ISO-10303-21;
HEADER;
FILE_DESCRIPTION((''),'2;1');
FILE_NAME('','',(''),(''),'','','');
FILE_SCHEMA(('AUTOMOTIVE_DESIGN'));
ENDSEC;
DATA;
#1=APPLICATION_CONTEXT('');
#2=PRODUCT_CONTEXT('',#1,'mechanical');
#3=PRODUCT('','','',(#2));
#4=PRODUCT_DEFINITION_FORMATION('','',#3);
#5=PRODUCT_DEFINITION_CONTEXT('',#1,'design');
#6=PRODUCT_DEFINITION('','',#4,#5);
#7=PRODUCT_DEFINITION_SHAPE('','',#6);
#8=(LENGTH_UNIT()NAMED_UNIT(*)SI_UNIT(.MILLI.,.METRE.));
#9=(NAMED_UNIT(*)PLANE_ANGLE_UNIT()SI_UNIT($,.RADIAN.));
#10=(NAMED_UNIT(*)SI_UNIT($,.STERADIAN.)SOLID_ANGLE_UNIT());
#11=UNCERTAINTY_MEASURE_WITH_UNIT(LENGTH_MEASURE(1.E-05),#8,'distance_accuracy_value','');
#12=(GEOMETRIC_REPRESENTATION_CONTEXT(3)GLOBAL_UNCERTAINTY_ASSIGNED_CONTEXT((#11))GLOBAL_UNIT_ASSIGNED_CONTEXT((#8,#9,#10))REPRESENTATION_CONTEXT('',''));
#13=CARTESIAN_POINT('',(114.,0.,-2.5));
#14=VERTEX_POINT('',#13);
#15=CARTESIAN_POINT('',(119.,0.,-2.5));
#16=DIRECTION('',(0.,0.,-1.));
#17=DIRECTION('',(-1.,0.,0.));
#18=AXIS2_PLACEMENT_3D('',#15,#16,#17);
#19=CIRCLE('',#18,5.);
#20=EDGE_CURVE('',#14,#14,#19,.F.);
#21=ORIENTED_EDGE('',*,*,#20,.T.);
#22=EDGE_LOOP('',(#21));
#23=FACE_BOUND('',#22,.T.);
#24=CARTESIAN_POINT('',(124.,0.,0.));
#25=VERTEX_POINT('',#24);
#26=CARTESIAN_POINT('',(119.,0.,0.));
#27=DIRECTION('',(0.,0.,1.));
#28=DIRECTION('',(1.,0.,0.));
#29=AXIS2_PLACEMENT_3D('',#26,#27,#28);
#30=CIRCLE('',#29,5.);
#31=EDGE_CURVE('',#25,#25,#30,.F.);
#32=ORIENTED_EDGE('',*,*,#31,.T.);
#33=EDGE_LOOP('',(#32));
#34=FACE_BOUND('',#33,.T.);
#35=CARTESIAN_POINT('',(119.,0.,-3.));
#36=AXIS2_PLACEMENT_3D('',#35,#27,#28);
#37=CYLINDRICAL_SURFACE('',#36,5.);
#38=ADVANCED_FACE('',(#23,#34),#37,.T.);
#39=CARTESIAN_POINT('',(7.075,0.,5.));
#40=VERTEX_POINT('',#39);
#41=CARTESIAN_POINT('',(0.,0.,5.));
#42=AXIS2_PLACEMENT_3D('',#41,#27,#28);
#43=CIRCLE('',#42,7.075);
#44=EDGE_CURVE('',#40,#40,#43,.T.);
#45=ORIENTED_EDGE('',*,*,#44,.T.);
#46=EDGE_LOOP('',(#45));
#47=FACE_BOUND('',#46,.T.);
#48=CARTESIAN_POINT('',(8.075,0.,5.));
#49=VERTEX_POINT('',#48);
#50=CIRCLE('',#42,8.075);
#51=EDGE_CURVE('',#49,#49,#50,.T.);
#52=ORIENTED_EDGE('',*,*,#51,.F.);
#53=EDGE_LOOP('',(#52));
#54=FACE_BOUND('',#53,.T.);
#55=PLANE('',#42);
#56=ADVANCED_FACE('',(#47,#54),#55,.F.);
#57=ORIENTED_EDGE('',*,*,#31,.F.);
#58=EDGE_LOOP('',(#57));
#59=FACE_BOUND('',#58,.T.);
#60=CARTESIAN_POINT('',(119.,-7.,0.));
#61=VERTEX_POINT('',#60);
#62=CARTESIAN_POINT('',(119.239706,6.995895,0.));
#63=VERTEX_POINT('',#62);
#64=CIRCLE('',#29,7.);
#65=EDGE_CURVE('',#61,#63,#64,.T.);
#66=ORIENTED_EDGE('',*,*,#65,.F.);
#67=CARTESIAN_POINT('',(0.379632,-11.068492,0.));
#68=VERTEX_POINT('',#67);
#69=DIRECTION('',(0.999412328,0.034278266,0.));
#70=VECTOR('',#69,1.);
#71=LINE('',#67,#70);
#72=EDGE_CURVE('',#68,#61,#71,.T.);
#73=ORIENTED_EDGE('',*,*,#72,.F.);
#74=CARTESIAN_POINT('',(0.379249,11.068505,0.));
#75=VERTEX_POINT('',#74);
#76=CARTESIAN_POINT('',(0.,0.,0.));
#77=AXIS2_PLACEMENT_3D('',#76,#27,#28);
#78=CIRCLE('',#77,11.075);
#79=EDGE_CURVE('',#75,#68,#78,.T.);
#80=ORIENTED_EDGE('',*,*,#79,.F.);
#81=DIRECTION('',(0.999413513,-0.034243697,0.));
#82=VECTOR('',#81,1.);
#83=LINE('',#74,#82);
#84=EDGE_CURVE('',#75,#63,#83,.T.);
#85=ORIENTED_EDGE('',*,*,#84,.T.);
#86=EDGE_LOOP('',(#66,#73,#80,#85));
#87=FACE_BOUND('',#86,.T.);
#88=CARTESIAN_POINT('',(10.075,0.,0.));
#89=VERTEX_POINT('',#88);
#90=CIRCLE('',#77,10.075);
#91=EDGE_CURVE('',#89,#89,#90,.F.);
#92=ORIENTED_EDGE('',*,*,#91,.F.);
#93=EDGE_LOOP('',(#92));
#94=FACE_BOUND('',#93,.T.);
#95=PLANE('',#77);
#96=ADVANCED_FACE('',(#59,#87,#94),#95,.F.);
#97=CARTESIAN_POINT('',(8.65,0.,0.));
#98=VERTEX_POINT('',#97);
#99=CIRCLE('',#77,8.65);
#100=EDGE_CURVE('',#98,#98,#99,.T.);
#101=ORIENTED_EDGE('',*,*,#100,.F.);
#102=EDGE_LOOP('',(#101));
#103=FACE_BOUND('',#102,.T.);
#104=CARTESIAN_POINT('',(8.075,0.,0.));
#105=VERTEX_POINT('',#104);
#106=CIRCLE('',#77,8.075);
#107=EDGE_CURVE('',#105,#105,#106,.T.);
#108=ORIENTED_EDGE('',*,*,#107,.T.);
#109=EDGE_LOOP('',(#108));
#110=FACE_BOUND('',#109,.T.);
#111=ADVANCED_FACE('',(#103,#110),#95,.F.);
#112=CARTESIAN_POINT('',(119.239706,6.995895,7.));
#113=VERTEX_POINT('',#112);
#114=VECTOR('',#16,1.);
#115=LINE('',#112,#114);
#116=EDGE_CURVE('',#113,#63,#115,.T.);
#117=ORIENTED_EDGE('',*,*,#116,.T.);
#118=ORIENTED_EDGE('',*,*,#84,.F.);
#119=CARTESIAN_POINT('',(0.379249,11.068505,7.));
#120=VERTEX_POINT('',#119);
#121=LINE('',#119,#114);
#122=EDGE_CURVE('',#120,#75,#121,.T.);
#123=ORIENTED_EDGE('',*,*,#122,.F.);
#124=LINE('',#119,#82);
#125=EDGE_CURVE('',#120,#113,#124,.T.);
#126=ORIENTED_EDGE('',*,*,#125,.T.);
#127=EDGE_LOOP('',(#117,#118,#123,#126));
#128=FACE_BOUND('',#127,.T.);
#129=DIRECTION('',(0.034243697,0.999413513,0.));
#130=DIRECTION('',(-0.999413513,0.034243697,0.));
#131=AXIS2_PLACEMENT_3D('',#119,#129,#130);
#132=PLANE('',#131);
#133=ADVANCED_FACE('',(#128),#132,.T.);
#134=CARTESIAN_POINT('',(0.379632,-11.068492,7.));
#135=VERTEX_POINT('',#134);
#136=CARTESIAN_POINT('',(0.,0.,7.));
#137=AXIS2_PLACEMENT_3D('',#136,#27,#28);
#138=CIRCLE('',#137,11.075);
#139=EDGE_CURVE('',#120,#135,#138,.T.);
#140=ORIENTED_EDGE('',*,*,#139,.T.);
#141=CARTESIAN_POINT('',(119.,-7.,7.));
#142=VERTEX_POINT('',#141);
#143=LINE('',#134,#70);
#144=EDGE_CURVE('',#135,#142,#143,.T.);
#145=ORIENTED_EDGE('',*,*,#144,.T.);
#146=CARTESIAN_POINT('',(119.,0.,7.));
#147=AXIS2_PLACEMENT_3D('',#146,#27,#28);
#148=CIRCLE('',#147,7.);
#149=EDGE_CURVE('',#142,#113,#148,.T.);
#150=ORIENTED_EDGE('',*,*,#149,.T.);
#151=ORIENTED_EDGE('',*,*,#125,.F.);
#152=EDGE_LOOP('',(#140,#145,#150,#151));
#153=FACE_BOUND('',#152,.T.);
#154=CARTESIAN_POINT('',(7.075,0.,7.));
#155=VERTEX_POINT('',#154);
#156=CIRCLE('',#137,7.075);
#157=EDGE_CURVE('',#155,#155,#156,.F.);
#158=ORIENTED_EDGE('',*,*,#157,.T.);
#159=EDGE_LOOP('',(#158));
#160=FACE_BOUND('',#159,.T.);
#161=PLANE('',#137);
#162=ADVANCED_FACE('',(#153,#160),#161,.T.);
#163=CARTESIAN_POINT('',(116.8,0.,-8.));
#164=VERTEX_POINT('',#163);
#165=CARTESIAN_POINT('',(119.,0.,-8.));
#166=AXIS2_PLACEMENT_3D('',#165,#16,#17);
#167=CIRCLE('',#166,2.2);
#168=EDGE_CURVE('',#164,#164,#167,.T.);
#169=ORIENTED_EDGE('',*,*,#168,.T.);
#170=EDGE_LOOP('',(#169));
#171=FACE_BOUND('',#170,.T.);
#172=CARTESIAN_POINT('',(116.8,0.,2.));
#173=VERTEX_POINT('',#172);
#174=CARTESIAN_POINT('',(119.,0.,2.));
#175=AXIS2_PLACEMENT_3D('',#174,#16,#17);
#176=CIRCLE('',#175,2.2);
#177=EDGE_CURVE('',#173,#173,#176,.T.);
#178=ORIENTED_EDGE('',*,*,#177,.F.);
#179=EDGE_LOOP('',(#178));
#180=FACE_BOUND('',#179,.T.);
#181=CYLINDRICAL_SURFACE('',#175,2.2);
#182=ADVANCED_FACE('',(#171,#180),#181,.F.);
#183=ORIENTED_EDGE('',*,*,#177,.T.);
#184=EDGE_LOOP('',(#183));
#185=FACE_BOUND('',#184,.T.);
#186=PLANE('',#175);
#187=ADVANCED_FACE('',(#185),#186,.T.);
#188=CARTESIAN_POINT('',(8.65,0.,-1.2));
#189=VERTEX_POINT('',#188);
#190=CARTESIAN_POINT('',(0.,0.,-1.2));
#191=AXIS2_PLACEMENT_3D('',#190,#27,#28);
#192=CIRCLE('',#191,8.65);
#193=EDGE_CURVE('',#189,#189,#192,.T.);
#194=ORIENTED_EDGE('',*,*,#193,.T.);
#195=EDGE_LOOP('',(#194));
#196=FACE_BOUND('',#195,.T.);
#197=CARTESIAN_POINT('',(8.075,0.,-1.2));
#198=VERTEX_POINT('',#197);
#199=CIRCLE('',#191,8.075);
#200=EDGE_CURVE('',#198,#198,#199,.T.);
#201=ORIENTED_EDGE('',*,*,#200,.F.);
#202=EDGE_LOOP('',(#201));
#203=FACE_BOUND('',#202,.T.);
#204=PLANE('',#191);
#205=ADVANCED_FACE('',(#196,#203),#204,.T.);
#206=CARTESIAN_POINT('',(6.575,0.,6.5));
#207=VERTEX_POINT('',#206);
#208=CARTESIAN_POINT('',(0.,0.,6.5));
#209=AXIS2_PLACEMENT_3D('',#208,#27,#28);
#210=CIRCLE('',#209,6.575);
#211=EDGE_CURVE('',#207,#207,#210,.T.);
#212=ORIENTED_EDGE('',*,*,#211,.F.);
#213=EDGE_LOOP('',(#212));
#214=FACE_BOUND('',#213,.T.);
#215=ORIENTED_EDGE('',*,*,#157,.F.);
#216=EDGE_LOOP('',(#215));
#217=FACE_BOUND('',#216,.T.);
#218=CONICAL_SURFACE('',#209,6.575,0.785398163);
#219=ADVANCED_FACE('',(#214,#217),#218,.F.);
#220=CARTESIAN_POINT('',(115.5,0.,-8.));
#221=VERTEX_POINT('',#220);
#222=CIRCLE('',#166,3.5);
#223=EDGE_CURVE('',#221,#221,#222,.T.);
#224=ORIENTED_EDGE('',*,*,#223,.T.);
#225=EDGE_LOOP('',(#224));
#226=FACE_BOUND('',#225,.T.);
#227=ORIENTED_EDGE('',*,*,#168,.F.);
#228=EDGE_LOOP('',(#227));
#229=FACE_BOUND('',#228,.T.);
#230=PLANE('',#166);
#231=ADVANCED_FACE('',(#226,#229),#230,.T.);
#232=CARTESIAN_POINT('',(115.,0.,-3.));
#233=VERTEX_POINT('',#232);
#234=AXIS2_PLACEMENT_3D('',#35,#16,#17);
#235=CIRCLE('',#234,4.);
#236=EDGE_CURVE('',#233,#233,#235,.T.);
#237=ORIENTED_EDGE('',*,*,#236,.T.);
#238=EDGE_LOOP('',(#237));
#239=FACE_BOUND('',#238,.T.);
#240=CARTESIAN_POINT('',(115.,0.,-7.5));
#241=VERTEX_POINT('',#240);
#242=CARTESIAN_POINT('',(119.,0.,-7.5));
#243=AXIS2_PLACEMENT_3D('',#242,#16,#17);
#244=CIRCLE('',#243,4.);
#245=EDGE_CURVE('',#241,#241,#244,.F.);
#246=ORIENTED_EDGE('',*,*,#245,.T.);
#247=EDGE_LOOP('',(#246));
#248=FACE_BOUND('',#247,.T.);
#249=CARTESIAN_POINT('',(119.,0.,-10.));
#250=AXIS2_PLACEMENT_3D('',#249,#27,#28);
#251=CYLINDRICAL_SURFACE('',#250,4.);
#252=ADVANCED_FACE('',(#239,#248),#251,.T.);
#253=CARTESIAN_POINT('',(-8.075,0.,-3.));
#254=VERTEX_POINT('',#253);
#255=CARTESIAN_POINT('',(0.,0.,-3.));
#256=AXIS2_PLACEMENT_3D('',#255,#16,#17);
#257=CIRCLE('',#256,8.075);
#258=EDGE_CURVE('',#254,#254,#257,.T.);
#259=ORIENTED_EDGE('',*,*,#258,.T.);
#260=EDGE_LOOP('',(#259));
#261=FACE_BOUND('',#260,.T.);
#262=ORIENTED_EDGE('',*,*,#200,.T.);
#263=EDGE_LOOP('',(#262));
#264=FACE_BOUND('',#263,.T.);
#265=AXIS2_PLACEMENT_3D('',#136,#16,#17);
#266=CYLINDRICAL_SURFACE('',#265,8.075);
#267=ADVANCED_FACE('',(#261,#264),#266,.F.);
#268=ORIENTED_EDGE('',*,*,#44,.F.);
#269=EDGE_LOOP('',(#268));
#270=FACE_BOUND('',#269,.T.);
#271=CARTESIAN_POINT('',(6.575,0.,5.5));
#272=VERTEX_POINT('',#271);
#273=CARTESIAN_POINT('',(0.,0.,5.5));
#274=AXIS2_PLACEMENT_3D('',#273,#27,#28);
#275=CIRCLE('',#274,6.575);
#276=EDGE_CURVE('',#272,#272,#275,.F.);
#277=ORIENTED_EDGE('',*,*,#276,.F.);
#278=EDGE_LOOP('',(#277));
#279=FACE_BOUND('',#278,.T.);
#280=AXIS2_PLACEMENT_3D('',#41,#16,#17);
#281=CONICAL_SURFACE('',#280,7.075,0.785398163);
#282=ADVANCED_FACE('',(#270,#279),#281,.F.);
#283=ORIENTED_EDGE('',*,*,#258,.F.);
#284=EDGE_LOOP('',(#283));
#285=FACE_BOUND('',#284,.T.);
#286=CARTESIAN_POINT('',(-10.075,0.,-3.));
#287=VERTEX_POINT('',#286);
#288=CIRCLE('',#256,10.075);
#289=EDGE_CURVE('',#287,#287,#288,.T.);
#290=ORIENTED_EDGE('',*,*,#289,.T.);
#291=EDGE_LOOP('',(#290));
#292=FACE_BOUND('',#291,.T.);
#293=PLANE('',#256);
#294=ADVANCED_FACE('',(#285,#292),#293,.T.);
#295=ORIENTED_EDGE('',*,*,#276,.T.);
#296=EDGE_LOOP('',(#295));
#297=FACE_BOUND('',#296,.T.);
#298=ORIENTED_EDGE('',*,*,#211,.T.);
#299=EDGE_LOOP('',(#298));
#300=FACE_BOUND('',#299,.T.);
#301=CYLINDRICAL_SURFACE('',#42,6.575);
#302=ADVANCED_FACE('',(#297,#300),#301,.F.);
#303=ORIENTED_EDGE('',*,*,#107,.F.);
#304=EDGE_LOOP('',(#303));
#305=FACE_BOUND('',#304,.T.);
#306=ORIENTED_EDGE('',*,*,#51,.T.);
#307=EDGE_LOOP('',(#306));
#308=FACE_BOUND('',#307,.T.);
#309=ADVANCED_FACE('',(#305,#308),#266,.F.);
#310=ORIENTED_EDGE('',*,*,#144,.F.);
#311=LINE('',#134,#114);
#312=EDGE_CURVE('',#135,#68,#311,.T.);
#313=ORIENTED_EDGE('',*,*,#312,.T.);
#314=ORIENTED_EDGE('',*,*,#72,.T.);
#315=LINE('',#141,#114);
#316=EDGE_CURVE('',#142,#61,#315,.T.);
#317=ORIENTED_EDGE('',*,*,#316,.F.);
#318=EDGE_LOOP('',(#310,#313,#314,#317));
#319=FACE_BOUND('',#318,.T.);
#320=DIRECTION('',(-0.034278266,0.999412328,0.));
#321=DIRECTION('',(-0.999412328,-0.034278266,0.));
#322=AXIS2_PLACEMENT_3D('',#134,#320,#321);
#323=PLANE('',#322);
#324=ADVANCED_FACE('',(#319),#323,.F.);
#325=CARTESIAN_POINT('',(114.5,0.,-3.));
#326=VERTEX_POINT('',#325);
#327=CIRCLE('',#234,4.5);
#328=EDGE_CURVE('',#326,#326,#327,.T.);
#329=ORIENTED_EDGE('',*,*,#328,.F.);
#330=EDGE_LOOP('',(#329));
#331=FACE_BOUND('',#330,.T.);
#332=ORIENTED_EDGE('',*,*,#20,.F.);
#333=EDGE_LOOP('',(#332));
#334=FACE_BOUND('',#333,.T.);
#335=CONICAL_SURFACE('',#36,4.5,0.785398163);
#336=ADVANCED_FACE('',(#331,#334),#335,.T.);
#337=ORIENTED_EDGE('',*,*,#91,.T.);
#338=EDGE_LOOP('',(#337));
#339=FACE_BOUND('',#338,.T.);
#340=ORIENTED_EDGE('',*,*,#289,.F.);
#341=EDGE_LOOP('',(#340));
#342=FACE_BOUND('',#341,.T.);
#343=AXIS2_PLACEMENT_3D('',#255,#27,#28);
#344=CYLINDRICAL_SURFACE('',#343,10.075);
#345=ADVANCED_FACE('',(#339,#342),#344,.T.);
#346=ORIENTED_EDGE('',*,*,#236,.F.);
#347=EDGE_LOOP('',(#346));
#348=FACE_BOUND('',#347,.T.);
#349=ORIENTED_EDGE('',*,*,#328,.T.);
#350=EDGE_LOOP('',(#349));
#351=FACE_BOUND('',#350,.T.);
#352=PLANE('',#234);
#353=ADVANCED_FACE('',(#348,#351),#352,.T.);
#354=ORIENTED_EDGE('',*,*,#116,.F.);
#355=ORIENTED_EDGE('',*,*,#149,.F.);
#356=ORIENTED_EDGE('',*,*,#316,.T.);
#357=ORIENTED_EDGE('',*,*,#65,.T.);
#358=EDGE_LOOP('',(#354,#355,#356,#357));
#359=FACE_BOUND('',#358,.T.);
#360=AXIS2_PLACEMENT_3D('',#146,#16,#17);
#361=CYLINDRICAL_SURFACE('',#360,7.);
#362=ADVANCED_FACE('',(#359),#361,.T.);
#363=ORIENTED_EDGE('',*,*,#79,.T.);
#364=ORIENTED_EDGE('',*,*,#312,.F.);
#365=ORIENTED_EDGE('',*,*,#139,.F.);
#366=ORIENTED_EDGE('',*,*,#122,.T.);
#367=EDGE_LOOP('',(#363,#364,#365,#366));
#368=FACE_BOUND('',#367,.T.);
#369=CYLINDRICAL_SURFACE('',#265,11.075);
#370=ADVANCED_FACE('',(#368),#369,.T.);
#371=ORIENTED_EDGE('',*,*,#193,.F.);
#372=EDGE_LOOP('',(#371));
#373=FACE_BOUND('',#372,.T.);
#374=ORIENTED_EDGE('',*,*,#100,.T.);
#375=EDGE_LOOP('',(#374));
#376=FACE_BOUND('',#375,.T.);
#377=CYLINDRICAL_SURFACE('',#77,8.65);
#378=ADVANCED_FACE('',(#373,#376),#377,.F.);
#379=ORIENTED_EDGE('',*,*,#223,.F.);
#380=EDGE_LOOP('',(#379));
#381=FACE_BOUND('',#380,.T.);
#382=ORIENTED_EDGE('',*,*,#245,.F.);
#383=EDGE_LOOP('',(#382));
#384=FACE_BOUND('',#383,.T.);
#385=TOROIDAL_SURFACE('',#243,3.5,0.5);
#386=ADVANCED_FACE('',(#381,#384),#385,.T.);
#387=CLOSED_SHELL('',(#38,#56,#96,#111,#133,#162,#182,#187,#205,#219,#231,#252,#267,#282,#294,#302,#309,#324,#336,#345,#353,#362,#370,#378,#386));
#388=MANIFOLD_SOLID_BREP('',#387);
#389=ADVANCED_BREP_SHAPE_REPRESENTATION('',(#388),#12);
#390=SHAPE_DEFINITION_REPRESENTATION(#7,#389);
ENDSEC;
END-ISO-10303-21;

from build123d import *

# Parameters (mm, degrees)
SKETCH_1_R          = 8.075
EXTRUDE_1_DEPTH     = 7
EXTRUDE_START       = -2
SKETCH_2_R          = 8.075
SKETCH_2_R_2        = 6.575
EXTRUDE_2_DEPTH     = 2
SKETCH_3_R          = 4
EXTRUDE_3_DEPTH     = 10
SKETCH_4_R          = 5
SKETCH_4_R_2        = 4
EXTRUDE_4_DEPTH     = 3
CHAMFER_1_SIZE      = 0.5
CUT_EXTRUDE_1_DEPTH = 7
CUT_EXTRUDE_2_DEPTH = 5
CUT_EXTRUDE_START   = -2
SKETCH_8_R          = 4
CUT_EXTRUDE_3_DEPTH = 2
FILLET_1_R          = 0.5
SKETCH_9_R          = 2.2
CUT_EXTRUDE_4_DEPTH = 10
EXTRUDE_START_2     = 3
SKETCH_10_R         = 10.075
SKETCH_10_R_2       = 8.075
EXTRUDE_5_DEPTH     = 3
EXTRUDE_6_DEPTH     = 2
EXTRUDE_START_3     = 5
EXTRUDE_7_DEPTH     = 5


with BuildPart() as part:
    # 草图1 → 凸台-拉伸1 (new body)
    with BuildSketch(Plane.XY):
        with BuildLine():
            ThreePointArc((0.37924895, 11.068504652), (-11.074999998, -0.000191538), (0.379631801, -11.068491528))
            Line((0.379631801, -11.068491528), (119, -7))
            ThreePointArc((119, -7), (125.998973572, -0.119870518), (119.239705882, 6.995894588))
            Line((119.239705882, 6.995894588), (0.37924895, 11.068504652))
        make_face()
        Circle(SKETCH_1_R, mode=Mode.SUBTRACT)
    extrude(amount=EXTRUDE_1_DEPTH)

    # 草图2 → 凸台-拉伸2 (add)
    with BuildSketch(Plane.XY.offset(7).offset(EXTRUDE_START)):
        Circle(SKETCH_2_R)
        Circle(SKETCH_2_R_2, mode=Mode.SUBTRACT)
    extrude(amount=EXTRUDE_2_DEPTH)

    # 草图3 → 凸台-拉伸3 (add)
    with BuildSketch(Plane(origin=(0, 0, 0), x_dir=(-1, 0, 0), z_dir=(0, 0, -1))):
        with Locations((-119, 0)):
            Circle(SKETCH_3_R)
    extrude(amount=EXTRUDE_3_DEPTH)

    # 草图4 → 凸台-拉伸4 (add)
    with BuildSketch(Plane(origin=(0, 0, 0), x_dir=(-1, 0, 0), z_dir=(0, 0, -1))):
        with Locations(Location((-119, 0, 0), (0, 0, 180))):
            Circle(SKETCH_4_R)
        with Locations((-119, 0)):
            Circle(SKETCH_4_R_2, mode=Mode.SUBTRACT)
    extrude(amount=EXTRUDE_4_DEPTH)

    # 倒角1
    chamfer_1_edges = [part.edges().sort_by_distance(p)[0] for p in [
        (-6.575, 0, 5),
        (-6.575, 0, 7),
        (123, 0, -10),
        (114, 0, -3),
    ]]
    chamfer(chamfer_1_edges, length=CHAMFER_1_SIZE)

    # 草图5 → 切除-拉伸1 (cut)
    with BuildSketch(Plane(origin=(0, 0, 0), x_dir=(-1, 0, 0), z_dir=(0, 0, -1))):
        with BuildLine():
            ThreePointArc((-12.757234161, -4.640431182), (-13.574999998, 0.000234775), (-12.757073645, 4.640872443))
            Line((-12.757073645, 4.640872443), (-109.090204802, 1.340134001))
            ThreePointArc((-109.090204802, 1.340134001), (-109.022576686, 0.671583213), (-109, 0))
            ThreePointArc((-109, 0), (-109.022449652, -0.669693251), (-109.08969781, -1.336379625))
            Line((-109.08969781, -1.336379625), (-12.757234161, -4.640431182))
        make_face()
    extrude(amount=-CUT_EXTRUDE_1_DEPTH, mode=Mode.SUBTRACT)

    # 草图6 → 切除-拉伸2 (cut)
    with BuildSketch(Plane(origin=(0, 0, 0), x_dir=(-1, 0, 0), z_dir=(0, 0, -1))):
        Polygon((-109.08969781, -1.336379625), (-12.757234161, -4.640431182), (-12.860068961, -7.638668165), (-109.192532609, -4.334616608), align=None)
        Polygon((-12.757073645, 4.640872443), (-109.090204802, 1.340134001), (-109.192935895, 4.338374538), (-12.859804737, 7.63911298), align=None)
    extrude(amount=-CUT_EXTRUDE_2_DEPTH, mode=Mode.SUBTRACT)

    # 草图8 → 切除-拉伸3 (cut)
    with BuildSketch(Plane(origin=(0, 0, -10), x_dir=(-1, 0, 0), z_dir=(0, 0, -1)).offset(CUT_EXTRUDE_START)):
        with Locations((-119, 0)):
            Circle(SKETCH_8_R)
    extrude(amount=CUT_EXTRUDE_3_DEPTH, mode=Mode.SUBTRACT)

    # 圆角1
    fillet_1_edges = [part.edges().sort_by_distance(p)[0] for p in [
        (123, 0, -8),
    ]]
    fillet(fillet_1_edges, radius=FILLET_1_R)

    # 草图9 → 切除-拉伸4 (cut)
    with BuildSketch(Plane(origin=(0, 0, -8), x_dir=(-1, 0, 0), z_dir=(0, 0, -1))):
        with Locations((-119, 0)):
            Circle(SKETCH_9_R)
    extrude(amount=-CUT_EXTRUDE_4_DEPTH, mode=Mode.SUBTRACT)

    # 草图10 → 凸台-拉伸5 (add)
    with BuildSketch(Plane(origin=(0, 0, 0), x_dir=(-1, 0, 0), z_dir=(0, 0, -1)).offset(EXTRUDE_START_2)):
        with Locations(Location((0, 0, 0), (0, 0, 180))):
            Circle(SKETCH_10_R)
        Circle(SKETCH_10_R_2, mode=Mode.SUBTRACT)
    extrude(amount=-EXTRUDE_5_DEPTH)

    # 切除-旋转2: read off the stored shape, not the designer's step
    # 切除-旋转2: loft between two sections, ruled curve by curve
    cut_revolve_2_from = [
        Edge.make_three_point_arc((8.65, 0, -1.2), (0, 8.65, -1.2), (-8.65, 0, -1.2)),
        Edge.make_three_point_arc((-8.65, 0, -1.2), (0, -8.65, -1.2), (8.65, 0, -1.2)),
    ]
    cut_revolve_2_to = [
        Edge.make_three_point_arc((8.65, 0, 0), (0, 8.65, 0), (-8.65, 0, 0)),
        Edge.make_three_point_arc((-8.65, 0, 0), (0, -8.65, 0), (8.65, 0, 0)),
    ]
    cut_revolve_2 = Solid(Shell([*[Face.make_surface_from_curves(cut_revolve_2_from[k], cut_revolve_2_to[k]) for k in range(2)], Face(Wire(cut_revolve_2_from)), Face(Wire(cut_revolve_2_to))]))
    add(cut_revolve_2, mode=Mode.SUBTRACT)

    # 草图12 → 凸台-拉伸6 (add)
    with BuildSketch(Plane.XY.offset(7).offset(EXTRUDE_START)):
        with BuildLine():
            Line((109.08969781, -1.336379625), (12.757234161, -4.640431182))
            ThreePointArc((12.757234161, -4.640431182), (13.574999998, 0.000234775), (12.757073645, 4.640872443))
            Line((12.757073645, 4.640872443), (109.090204802, 1.340134001))
            ThreePointArc((109.090204802, 1.340134001), (109.000000179, 0.001894226), (109.08969781, -1.336379625))
        make_face()
    extrude(amount=EXTRUDE_6_DEPTH)

    # 草图13 → 凸台-拉伸7 (add)
    with BuildSketch(Plane(origin=(0, 0, 5), x_dir=(-1, 0, 0), z_dir=(0, 0, -1)).offset(EXTRUDE_START_3)):
        with BuildLine():
            Line((-109.08969781, -1.336379625), (-109.192532609, -4.334616608))
            Line((-109.192532609, -4.334616608), (-12.860068961, -7.638668165))
            Line((-12.860068961, -7.638668165), (-12.757234161, -4.640431182))
            ThreePointArc((-12.757234161, -4.640431182), (-13.574999998, 0.000234775), (-12.757073645, 4.640872443))
            Line((-12.757073645, 4.640872443), (-12.859804737, 7.63911298))
            Line((-12.859804737, 7.63911298), (-109.192935895, 4.338374538))
            Line((-109.192935895, 4.338374538), (-109.090204802, 1.340134001))
            ThreePointArc((-109.090204802, 1.340134001), (-109.000000179, 0.001894226), (-109.08969781, -1.336379625))
        make_face()
    extrude(amount=-EXTRUDE_7_DEPTH)


solid = part.part
